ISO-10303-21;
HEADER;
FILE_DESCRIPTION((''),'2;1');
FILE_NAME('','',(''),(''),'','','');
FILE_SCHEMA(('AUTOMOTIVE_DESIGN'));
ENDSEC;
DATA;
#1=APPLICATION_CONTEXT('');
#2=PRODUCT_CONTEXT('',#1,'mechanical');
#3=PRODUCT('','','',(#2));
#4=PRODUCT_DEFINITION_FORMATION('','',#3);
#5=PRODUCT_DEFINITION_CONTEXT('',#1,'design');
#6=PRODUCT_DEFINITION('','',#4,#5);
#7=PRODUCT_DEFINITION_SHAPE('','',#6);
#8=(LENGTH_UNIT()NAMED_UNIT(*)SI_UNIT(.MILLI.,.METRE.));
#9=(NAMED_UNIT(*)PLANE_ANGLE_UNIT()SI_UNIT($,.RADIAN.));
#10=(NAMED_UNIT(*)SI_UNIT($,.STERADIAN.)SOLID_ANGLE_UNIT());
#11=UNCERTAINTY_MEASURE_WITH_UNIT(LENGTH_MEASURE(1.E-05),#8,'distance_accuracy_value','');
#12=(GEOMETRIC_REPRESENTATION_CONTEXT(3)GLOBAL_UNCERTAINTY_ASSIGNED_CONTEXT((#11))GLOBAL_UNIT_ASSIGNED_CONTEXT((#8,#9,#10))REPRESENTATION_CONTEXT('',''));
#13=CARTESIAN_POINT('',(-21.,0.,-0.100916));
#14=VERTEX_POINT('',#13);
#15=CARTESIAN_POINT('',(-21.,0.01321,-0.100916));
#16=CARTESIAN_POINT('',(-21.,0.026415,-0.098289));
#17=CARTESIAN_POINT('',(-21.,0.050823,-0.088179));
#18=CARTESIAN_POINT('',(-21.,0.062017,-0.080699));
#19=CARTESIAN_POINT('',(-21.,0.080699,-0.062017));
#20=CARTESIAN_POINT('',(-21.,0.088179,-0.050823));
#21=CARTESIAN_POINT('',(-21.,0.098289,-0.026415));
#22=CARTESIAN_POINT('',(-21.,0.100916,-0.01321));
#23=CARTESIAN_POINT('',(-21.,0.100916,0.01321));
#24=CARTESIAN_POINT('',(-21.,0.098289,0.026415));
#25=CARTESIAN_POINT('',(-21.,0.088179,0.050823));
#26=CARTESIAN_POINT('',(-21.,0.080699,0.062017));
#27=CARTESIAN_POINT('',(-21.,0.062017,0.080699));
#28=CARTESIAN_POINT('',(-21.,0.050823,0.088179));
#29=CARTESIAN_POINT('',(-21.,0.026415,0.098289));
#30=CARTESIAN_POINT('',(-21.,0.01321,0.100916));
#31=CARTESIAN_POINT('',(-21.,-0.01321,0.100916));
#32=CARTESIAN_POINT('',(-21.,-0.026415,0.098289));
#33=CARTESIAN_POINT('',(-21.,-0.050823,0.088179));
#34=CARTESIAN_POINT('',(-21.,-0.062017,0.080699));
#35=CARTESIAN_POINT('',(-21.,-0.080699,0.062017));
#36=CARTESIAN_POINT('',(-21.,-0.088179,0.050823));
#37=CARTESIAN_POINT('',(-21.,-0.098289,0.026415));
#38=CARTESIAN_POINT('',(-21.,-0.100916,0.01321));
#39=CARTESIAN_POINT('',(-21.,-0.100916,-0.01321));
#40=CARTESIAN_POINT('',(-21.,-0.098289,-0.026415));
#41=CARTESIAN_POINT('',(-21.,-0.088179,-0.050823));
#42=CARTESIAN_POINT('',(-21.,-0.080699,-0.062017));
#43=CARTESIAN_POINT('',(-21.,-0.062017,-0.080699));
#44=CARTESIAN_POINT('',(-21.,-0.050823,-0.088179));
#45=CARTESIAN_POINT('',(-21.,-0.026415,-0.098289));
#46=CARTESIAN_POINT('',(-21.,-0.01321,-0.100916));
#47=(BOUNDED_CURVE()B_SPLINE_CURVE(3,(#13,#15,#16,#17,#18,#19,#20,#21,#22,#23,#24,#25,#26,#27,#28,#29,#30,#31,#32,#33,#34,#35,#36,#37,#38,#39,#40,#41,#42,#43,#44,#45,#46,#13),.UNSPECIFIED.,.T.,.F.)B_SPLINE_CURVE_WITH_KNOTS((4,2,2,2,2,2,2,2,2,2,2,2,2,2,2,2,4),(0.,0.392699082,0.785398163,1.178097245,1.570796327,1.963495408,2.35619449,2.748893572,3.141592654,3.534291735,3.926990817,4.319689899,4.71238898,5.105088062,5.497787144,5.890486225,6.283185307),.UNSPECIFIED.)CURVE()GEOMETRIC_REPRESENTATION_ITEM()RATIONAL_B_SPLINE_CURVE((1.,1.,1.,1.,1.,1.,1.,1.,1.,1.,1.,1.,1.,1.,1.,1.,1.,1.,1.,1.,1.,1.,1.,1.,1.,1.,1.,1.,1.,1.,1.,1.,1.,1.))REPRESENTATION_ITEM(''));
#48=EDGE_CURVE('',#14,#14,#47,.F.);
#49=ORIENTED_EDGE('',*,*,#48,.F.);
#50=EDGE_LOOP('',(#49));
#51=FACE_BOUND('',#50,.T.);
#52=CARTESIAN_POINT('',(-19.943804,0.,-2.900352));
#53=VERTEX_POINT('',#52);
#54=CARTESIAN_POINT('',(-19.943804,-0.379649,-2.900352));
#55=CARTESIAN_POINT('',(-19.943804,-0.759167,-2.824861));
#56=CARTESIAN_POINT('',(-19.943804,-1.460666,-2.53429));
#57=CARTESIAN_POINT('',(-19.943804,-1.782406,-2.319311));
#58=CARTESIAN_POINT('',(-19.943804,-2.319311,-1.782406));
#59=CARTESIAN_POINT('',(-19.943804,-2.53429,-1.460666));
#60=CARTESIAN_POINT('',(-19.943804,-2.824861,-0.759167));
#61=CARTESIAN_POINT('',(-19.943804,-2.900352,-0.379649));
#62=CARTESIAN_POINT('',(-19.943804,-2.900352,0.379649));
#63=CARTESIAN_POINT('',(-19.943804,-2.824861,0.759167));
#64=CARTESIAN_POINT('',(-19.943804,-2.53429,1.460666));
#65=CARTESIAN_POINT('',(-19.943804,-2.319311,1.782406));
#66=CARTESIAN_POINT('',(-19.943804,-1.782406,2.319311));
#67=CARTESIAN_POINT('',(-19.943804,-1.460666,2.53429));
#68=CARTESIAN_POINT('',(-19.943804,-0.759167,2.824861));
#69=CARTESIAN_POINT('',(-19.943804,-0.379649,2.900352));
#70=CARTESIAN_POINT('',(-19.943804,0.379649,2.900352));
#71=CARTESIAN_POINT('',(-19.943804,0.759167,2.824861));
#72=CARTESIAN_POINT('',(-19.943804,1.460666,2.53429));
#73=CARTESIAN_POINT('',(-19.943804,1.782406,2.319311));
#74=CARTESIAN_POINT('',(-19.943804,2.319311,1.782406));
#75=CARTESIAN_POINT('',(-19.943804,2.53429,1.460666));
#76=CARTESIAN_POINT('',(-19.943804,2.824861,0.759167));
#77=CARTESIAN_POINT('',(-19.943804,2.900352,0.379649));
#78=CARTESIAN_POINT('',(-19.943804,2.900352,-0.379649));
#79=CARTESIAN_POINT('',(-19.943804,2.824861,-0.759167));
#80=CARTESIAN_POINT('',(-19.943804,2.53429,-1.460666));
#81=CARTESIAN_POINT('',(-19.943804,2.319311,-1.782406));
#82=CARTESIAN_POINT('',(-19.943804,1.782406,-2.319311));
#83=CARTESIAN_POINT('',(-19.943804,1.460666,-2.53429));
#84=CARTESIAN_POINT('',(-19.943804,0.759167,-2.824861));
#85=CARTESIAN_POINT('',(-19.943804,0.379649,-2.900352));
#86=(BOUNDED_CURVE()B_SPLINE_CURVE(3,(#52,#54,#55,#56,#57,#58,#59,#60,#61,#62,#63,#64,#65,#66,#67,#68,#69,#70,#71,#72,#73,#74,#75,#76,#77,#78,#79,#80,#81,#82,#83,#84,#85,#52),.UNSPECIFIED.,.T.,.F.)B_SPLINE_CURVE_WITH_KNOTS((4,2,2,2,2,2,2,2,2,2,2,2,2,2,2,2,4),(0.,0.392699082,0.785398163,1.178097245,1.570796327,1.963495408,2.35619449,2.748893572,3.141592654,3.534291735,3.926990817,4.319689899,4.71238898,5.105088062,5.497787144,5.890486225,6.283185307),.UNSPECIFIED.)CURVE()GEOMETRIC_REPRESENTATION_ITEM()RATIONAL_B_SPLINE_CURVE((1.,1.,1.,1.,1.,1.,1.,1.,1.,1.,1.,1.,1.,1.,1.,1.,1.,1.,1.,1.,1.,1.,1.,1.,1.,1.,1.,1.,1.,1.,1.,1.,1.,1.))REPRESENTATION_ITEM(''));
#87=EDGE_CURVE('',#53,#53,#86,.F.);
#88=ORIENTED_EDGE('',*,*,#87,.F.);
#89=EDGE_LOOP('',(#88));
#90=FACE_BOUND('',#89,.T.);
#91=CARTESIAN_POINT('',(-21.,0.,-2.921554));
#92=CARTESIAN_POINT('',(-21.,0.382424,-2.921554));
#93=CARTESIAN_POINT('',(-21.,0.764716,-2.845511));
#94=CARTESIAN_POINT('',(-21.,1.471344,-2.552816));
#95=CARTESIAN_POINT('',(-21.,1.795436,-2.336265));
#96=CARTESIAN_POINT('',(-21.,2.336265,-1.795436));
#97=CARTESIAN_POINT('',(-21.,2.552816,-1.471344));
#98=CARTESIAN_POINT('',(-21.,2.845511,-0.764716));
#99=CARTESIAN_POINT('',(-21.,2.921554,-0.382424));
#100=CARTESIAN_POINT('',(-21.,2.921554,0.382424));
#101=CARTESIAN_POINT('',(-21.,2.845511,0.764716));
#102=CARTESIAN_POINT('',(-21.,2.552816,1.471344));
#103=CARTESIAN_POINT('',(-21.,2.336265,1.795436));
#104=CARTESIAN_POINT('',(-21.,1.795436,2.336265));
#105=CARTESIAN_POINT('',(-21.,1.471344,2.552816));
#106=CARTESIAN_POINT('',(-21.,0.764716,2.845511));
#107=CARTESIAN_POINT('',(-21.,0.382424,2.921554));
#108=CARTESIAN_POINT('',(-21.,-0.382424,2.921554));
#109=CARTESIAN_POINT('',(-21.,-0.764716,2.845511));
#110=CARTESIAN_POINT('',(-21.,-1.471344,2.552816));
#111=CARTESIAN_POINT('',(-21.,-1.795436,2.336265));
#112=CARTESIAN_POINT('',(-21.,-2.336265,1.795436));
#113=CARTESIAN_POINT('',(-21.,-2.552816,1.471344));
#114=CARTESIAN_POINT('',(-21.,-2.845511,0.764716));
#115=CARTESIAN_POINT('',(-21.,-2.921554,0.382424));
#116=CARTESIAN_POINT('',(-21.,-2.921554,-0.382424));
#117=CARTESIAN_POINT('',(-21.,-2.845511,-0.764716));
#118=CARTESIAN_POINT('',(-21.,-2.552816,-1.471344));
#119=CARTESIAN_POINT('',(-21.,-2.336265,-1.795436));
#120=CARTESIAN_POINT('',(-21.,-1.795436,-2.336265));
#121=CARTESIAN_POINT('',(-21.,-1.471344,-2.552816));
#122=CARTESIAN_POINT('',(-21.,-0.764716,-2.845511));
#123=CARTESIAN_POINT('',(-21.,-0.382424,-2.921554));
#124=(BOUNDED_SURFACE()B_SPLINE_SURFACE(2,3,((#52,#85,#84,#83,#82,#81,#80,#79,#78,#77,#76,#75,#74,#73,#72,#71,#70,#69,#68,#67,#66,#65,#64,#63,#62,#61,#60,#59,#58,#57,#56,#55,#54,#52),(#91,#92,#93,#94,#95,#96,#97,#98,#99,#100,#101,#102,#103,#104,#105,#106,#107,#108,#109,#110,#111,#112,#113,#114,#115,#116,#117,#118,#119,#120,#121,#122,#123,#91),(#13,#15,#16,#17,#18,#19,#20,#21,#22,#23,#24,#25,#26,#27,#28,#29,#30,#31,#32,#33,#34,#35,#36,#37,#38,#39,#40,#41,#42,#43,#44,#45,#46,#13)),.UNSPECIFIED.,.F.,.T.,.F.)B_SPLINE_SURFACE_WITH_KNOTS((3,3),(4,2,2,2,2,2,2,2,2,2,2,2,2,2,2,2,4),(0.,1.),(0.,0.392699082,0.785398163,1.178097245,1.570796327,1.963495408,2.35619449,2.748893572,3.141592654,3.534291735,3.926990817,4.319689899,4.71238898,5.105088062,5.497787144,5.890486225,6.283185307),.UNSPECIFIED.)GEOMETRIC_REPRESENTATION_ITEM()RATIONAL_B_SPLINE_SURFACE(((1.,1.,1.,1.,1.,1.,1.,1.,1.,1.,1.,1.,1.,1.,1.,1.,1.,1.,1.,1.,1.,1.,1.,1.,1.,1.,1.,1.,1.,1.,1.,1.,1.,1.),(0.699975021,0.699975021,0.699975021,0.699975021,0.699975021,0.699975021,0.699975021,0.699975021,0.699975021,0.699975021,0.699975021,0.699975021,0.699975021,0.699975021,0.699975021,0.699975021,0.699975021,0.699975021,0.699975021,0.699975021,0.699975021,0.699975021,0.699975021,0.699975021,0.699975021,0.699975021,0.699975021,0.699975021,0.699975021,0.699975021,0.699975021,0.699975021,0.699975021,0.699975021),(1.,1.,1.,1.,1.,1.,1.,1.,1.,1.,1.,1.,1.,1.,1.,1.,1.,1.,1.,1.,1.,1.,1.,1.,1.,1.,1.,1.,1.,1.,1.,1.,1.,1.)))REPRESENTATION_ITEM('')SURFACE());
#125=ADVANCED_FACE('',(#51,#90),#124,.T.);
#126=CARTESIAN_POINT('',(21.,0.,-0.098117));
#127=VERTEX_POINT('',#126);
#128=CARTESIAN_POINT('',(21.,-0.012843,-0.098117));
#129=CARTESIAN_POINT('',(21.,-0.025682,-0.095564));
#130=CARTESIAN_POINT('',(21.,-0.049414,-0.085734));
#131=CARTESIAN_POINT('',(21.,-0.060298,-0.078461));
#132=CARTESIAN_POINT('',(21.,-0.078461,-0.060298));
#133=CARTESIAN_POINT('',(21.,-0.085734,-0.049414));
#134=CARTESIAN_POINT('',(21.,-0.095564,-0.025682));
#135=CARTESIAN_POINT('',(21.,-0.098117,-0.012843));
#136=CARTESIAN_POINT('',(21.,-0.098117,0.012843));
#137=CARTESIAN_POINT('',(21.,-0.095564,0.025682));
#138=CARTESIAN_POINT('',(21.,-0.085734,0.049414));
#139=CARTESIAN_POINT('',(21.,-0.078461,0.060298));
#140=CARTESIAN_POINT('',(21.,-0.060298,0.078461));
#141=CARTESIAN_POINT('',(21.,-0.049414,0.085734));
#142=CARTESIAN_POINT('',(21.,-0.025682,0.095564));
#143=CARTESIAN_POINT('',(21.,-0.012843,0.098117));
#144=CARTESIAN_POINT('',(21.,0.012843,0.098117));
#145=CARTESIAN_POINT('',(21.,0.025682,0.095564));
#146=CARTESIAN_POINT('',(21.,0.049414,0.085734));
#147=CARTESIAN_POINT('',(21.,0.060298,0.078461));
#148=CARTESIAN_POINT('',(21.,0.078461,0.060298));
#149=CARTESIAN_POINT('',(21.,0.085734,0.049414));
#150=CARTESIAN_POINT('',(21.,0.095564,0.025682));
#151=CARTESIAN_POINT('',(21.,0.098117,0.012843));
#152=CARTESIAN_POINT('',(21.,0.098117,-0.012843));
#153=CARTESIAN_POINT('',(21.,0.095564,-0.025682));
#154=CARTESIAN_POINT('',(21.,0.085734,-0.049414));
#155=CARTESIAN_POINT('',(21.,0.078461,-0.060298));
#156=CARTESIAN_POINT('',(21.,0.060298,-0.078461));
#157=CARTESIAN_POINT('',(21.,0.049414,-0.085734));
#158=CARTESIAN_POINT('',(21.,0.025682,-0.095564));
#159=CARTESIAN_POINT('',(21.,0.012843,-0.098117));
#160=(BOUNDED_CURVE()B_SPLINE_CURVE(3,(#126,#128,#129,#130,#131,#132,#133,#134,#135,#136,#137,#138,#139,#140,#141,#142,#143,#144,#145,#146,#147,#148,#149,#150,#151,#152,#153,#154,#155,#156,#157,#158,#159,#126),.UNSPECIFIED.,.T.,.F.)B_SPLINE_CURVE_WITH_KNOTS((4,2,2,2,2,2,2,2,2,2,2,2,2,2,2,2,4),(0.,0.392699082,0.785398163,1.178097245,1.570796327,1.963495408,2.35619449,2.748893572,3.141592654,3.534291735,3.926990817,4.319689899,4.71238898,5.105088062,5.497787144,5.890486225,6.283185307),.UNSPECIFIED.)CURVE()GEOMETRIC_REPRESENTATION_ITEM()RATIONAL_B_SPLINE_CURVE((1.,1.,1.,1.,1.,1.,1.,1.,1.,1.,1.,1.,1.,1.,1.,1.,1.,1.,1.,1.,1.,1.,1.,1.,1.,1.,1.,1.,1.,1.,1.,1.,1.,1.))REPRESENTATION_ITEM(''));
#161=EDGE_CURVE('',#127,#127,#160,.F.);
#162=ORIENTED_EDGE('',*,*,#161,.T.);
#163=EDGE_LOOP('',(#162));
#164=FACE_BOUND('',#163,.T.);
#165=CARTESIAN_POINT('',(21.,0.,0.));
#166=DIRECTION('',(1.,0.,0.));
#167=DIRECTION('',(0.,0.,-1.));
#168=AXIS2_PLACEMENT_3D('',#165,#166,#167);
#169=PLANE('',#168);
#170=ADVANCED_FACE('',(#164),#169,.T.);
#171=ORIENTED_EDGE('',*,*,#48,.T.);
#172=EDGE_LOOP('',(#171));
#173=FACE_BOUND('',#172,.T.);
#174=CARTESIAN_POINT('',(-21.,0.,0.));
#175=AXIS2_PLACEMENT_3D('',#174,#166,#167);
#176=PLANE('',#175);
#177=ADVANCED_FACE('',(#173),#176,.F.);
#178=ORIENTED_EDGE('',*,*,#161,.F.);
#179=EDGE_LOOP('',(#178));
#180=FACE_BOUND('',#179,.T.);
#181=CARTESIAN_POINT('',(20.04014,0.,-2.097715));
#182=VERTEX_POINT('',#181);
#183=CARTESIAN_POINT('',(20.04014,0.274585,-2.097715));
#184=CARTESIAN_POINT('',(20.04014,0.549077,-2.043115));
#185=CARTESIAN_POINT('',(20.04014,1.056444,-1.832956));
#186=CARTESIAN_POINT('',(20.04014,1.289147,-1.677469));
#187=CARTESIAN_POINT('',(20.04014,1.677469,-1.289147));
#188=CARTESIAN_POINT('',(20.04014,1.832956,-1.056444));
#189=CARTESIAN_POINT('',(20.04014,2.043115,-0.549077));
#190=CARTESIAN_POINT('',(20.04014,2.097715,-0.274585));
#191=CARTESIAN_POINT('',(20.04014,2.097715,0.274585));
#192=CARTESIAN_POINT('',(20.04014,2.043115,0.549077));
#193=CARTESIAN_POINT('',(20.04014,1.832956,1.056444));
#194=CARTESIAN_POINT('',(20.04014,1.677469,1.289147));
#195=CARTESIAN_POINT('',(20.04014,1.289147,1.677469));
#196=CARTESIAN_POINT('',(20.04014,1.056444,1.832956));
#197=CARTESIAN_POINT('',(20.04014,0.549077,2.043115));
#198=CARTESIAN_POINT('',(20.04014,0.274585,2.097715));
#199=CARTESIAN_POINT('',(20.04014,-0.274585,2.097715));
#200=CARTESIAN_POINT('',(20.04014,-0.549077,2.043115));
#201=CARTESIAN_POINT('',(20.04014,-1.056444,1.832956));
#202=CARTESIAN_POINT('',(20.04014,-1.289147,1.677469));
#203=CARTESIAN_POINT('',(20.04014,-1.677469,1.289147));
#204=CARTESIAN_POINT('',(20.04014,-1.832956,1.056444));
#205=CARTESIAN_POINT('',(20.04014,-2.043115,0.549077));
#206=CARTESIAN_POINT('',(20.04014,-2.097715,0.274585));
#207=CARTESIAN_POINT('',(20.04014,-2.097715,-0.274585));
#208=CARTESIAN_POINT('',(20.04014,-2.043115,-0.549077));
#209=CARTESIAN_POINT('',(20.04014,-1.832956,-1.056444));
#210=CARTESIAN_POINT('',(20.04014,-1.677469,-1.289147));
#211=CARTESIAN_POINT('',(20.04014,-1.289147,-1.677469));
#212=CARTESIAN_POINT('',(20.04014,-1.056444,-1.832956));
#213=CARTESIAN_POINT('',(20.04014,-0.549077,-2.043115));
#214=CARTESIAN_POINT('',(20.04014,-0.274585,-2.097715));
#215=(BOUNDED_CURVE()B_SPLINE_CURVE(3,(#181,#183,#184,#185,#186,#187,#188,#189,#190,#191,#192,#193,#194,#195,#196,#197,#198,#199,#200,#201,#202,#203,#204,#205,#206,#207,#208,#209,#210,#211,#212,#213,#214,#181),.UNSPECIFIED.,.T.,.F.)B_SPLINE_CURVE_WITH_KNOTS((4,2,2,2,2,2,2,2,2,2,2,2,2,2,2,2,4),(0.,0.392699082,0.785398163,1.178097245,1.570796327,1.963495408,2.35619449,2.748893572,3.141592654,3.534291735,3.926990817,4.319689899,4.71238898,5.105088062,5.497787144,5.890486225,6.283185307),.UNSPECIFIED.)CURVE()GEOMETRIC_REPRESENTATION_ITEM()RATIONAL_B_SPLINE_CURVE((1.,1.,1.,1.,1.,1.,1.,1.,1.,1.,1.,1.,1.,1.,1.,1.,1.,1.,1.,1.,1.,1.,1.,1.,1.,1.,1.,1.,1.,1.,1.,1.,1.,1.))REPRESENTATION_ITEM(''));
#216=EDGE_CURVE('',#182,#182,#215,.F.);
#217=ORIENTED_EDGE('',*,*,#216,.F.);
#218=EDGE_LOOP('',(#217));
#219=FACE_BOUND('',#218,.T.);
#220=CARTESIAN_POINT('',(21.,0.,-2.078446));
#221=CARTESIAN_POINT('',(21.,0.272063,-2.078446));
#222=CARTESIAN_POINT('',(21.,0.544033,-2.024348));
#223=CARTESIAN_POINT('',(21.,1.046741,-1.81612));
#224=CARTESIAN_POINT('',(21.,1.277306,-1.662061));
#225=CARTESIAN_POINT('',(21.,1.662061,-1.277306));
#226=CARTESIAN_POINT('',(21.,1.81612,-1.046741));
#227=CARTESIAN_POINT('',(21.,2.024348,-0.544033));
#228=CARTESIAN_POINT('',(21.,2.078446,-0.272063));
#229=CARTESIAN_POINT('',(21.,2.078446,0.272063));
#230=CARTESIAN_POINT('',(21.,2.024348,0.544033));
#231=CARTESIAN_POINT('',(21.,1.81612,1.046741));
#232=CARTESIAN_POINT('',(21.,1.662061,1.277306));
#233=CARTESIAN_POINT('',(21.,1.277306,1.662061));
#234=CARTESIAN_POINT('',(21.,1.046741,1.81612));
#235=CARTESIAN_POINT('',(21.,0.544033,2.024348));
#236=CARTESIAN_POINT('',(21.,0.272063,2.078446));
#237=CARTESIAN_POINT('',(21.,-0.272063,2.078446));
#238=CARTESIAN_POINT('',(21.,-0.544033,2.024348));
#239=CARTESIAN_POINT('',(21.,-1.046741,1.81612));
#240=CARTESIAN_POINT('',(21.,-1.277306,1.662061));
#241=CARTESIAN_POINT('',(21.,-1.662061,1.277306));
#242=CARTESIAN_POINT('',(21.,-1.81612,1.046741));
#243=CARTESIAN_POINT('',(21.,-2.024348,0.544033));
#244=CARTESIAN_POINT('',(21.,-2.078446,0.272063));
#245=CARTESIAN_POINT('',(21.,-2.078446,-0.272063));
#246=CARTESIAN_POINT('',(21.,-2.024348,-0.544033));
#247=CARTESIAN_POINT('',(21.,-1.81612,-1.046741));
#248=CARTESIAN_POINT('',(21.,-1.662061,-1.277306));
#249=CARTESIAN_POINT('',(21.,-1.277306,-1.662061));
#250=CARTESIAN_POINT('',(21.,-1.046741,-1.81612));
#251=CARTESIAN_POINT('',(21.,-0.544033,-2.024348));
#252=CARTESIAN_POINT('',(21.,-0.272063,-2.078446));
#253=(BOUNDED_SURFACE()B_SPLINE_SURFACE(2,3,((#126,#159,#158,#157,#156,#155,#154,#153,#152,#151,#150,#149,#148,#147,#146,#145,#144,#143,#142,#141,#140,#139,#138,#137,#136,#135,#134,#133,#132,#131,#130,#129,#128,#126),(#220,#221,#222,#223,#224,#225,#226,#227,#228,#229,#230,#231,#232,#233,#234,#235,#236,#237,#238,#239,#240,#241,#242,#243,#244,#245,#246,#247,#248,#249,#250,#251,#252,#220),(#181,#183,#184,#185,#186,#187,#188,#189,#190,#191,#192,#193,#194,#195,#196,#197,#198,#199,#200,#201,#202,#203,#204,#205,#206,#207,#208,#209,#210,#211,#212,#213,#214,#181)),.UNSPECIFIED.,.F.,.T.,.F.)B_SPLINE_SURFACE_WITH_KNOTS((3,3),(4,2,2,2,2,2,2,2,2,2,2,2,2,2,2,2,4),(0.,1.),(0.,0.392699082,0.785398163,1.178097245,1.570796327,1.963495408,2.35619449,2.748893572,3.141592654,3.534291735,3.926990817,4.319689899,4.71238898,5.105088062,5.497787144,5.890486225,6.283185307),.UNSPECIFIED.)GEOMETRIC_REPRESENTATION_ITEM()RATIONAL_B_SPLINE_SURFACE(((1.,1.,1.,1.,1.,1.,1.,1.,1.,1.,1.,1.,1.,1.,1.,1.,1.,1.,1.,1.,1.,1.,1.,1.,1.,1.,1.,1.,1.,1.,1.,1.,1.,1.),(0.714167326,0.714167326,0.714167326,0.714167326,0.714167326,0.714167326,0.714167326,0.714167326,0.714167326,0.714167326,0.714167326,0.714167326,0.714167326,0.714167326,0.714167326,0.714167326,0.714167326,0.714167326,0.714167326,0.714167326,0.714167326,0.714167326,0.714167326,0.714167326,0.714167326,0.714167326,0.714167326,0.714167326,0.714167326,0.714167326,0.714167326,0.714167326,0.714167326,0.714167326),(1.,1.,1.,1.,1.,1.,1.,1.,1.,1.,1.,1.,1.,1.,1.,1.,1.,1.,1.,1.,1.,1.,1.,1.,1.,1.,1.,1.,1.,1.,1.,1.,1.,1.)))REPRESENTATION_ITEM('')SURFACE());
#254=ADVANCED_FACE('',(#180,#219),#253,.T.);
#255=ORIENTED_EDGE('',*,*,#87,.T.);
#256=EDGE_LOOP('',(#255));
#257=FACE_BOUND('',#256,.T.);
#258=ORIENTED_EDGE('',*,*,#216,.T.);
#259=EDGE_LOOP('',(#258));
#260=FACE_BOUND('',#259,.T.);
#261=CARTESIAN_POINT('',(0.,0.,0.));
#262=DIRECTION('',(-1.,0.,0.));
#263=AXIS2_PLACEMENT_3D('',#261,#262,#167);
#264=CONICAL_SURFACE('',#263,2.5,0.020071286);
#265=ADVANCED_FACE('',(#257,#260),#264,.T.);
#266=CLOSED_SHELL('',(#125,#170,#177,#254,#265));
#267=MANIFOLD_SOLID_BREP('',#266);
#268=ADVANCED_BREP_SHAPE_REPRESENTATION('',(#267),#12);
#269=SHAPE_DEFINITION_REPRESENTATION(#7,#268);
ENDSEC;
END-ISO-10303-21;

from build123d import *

# Parameters (mm, degrees)
SKETCH2_R                     = 2.5
BOSS_EXTRUDE1_DEPTH           = 21
BOSS_EXTRUDE1_TAPER           = 1.15
BOSS_EXTRUDE1_OTHER_WAY_DEPTH = 21
BOSS_EXTRUDE1_OTHER_WAY_TAPER = -1.15


with BuildPart() as part:
    # Sketch2 → Boss-Extrude1 (new body)
    with BuildSketch(Plane(origin=(0, 0, 0), x_dir=(0, 0, -1), z_dir=(1, 0, 0))):
        Circle(SKETCH2_R)
    extrude(amount=BOSS_EXTRUDE1_DEPTH, taper=BOSS_EXTRUDE1_TAPER)

    # Sketch2 → Boss-Extrude1 other way (add)
    with BuildSketch(Plane(origin=(0, 0, 0), x_dir=(0, 0, -1), z_dir=(1, 0, 0))):
        Circle(SKETCH2_R)
    extrude(amount=-BOSS_EXTRUDE1_OTHER_WAY_DEPTH, taper=BOSS_EXTRUDE1_OTHER_WAY_TAPER)

    # Fillet1
    # an asymmetric fillet: 2.8, 1 mm, written as the material it takes off along each edge
    with BuildSketch(Plane(origin=(-21, 0, 0), x_dir=(0, 0, -1), z_dir=(0, -1, 0))) as fillet1_piece_1:
        with BuildLine():
            Bezier((2.900351568, 1.056195829), (2.921553624, 0), (0.100915548, 0), weights=[1, 0.699975021, 1])
            Line((0.100915548, 0), (2.921553624, 0))
            Line((2.921553624, 0), (2.900351568, 1.056195829))
        make_face()
    revolve(axis=Axis((-21, 0, 0), (1, 0, 0)), mode=Mode.SUBTRACT)

    # Fillet2
    # an asymmetric fillet: 2, 1 mm, written as the material it takes off along each edge
    with BuildSketch(Plane(origin=(21, 0, 0), x_dir=(0, 0, -1), z_dir=(0, 1, 0))) as fillet2_piece_1:
        with BuildLine():
            Bezier((2.097714591, 0.959860122), (2.078446376, 0), (0.098117434, 0), weights=[1, 0.714167326, 1])
            Line((0.098117434, 0), (2.078446376, 0))
            Line((2.078446376, 0), (2.097714591, 0.959860122))
        make_face()
    revolve(axis=Axis((21, 0, 0), (-1, 0, 0)), mode=Mode.SUBTRACT)


solid = part.part
